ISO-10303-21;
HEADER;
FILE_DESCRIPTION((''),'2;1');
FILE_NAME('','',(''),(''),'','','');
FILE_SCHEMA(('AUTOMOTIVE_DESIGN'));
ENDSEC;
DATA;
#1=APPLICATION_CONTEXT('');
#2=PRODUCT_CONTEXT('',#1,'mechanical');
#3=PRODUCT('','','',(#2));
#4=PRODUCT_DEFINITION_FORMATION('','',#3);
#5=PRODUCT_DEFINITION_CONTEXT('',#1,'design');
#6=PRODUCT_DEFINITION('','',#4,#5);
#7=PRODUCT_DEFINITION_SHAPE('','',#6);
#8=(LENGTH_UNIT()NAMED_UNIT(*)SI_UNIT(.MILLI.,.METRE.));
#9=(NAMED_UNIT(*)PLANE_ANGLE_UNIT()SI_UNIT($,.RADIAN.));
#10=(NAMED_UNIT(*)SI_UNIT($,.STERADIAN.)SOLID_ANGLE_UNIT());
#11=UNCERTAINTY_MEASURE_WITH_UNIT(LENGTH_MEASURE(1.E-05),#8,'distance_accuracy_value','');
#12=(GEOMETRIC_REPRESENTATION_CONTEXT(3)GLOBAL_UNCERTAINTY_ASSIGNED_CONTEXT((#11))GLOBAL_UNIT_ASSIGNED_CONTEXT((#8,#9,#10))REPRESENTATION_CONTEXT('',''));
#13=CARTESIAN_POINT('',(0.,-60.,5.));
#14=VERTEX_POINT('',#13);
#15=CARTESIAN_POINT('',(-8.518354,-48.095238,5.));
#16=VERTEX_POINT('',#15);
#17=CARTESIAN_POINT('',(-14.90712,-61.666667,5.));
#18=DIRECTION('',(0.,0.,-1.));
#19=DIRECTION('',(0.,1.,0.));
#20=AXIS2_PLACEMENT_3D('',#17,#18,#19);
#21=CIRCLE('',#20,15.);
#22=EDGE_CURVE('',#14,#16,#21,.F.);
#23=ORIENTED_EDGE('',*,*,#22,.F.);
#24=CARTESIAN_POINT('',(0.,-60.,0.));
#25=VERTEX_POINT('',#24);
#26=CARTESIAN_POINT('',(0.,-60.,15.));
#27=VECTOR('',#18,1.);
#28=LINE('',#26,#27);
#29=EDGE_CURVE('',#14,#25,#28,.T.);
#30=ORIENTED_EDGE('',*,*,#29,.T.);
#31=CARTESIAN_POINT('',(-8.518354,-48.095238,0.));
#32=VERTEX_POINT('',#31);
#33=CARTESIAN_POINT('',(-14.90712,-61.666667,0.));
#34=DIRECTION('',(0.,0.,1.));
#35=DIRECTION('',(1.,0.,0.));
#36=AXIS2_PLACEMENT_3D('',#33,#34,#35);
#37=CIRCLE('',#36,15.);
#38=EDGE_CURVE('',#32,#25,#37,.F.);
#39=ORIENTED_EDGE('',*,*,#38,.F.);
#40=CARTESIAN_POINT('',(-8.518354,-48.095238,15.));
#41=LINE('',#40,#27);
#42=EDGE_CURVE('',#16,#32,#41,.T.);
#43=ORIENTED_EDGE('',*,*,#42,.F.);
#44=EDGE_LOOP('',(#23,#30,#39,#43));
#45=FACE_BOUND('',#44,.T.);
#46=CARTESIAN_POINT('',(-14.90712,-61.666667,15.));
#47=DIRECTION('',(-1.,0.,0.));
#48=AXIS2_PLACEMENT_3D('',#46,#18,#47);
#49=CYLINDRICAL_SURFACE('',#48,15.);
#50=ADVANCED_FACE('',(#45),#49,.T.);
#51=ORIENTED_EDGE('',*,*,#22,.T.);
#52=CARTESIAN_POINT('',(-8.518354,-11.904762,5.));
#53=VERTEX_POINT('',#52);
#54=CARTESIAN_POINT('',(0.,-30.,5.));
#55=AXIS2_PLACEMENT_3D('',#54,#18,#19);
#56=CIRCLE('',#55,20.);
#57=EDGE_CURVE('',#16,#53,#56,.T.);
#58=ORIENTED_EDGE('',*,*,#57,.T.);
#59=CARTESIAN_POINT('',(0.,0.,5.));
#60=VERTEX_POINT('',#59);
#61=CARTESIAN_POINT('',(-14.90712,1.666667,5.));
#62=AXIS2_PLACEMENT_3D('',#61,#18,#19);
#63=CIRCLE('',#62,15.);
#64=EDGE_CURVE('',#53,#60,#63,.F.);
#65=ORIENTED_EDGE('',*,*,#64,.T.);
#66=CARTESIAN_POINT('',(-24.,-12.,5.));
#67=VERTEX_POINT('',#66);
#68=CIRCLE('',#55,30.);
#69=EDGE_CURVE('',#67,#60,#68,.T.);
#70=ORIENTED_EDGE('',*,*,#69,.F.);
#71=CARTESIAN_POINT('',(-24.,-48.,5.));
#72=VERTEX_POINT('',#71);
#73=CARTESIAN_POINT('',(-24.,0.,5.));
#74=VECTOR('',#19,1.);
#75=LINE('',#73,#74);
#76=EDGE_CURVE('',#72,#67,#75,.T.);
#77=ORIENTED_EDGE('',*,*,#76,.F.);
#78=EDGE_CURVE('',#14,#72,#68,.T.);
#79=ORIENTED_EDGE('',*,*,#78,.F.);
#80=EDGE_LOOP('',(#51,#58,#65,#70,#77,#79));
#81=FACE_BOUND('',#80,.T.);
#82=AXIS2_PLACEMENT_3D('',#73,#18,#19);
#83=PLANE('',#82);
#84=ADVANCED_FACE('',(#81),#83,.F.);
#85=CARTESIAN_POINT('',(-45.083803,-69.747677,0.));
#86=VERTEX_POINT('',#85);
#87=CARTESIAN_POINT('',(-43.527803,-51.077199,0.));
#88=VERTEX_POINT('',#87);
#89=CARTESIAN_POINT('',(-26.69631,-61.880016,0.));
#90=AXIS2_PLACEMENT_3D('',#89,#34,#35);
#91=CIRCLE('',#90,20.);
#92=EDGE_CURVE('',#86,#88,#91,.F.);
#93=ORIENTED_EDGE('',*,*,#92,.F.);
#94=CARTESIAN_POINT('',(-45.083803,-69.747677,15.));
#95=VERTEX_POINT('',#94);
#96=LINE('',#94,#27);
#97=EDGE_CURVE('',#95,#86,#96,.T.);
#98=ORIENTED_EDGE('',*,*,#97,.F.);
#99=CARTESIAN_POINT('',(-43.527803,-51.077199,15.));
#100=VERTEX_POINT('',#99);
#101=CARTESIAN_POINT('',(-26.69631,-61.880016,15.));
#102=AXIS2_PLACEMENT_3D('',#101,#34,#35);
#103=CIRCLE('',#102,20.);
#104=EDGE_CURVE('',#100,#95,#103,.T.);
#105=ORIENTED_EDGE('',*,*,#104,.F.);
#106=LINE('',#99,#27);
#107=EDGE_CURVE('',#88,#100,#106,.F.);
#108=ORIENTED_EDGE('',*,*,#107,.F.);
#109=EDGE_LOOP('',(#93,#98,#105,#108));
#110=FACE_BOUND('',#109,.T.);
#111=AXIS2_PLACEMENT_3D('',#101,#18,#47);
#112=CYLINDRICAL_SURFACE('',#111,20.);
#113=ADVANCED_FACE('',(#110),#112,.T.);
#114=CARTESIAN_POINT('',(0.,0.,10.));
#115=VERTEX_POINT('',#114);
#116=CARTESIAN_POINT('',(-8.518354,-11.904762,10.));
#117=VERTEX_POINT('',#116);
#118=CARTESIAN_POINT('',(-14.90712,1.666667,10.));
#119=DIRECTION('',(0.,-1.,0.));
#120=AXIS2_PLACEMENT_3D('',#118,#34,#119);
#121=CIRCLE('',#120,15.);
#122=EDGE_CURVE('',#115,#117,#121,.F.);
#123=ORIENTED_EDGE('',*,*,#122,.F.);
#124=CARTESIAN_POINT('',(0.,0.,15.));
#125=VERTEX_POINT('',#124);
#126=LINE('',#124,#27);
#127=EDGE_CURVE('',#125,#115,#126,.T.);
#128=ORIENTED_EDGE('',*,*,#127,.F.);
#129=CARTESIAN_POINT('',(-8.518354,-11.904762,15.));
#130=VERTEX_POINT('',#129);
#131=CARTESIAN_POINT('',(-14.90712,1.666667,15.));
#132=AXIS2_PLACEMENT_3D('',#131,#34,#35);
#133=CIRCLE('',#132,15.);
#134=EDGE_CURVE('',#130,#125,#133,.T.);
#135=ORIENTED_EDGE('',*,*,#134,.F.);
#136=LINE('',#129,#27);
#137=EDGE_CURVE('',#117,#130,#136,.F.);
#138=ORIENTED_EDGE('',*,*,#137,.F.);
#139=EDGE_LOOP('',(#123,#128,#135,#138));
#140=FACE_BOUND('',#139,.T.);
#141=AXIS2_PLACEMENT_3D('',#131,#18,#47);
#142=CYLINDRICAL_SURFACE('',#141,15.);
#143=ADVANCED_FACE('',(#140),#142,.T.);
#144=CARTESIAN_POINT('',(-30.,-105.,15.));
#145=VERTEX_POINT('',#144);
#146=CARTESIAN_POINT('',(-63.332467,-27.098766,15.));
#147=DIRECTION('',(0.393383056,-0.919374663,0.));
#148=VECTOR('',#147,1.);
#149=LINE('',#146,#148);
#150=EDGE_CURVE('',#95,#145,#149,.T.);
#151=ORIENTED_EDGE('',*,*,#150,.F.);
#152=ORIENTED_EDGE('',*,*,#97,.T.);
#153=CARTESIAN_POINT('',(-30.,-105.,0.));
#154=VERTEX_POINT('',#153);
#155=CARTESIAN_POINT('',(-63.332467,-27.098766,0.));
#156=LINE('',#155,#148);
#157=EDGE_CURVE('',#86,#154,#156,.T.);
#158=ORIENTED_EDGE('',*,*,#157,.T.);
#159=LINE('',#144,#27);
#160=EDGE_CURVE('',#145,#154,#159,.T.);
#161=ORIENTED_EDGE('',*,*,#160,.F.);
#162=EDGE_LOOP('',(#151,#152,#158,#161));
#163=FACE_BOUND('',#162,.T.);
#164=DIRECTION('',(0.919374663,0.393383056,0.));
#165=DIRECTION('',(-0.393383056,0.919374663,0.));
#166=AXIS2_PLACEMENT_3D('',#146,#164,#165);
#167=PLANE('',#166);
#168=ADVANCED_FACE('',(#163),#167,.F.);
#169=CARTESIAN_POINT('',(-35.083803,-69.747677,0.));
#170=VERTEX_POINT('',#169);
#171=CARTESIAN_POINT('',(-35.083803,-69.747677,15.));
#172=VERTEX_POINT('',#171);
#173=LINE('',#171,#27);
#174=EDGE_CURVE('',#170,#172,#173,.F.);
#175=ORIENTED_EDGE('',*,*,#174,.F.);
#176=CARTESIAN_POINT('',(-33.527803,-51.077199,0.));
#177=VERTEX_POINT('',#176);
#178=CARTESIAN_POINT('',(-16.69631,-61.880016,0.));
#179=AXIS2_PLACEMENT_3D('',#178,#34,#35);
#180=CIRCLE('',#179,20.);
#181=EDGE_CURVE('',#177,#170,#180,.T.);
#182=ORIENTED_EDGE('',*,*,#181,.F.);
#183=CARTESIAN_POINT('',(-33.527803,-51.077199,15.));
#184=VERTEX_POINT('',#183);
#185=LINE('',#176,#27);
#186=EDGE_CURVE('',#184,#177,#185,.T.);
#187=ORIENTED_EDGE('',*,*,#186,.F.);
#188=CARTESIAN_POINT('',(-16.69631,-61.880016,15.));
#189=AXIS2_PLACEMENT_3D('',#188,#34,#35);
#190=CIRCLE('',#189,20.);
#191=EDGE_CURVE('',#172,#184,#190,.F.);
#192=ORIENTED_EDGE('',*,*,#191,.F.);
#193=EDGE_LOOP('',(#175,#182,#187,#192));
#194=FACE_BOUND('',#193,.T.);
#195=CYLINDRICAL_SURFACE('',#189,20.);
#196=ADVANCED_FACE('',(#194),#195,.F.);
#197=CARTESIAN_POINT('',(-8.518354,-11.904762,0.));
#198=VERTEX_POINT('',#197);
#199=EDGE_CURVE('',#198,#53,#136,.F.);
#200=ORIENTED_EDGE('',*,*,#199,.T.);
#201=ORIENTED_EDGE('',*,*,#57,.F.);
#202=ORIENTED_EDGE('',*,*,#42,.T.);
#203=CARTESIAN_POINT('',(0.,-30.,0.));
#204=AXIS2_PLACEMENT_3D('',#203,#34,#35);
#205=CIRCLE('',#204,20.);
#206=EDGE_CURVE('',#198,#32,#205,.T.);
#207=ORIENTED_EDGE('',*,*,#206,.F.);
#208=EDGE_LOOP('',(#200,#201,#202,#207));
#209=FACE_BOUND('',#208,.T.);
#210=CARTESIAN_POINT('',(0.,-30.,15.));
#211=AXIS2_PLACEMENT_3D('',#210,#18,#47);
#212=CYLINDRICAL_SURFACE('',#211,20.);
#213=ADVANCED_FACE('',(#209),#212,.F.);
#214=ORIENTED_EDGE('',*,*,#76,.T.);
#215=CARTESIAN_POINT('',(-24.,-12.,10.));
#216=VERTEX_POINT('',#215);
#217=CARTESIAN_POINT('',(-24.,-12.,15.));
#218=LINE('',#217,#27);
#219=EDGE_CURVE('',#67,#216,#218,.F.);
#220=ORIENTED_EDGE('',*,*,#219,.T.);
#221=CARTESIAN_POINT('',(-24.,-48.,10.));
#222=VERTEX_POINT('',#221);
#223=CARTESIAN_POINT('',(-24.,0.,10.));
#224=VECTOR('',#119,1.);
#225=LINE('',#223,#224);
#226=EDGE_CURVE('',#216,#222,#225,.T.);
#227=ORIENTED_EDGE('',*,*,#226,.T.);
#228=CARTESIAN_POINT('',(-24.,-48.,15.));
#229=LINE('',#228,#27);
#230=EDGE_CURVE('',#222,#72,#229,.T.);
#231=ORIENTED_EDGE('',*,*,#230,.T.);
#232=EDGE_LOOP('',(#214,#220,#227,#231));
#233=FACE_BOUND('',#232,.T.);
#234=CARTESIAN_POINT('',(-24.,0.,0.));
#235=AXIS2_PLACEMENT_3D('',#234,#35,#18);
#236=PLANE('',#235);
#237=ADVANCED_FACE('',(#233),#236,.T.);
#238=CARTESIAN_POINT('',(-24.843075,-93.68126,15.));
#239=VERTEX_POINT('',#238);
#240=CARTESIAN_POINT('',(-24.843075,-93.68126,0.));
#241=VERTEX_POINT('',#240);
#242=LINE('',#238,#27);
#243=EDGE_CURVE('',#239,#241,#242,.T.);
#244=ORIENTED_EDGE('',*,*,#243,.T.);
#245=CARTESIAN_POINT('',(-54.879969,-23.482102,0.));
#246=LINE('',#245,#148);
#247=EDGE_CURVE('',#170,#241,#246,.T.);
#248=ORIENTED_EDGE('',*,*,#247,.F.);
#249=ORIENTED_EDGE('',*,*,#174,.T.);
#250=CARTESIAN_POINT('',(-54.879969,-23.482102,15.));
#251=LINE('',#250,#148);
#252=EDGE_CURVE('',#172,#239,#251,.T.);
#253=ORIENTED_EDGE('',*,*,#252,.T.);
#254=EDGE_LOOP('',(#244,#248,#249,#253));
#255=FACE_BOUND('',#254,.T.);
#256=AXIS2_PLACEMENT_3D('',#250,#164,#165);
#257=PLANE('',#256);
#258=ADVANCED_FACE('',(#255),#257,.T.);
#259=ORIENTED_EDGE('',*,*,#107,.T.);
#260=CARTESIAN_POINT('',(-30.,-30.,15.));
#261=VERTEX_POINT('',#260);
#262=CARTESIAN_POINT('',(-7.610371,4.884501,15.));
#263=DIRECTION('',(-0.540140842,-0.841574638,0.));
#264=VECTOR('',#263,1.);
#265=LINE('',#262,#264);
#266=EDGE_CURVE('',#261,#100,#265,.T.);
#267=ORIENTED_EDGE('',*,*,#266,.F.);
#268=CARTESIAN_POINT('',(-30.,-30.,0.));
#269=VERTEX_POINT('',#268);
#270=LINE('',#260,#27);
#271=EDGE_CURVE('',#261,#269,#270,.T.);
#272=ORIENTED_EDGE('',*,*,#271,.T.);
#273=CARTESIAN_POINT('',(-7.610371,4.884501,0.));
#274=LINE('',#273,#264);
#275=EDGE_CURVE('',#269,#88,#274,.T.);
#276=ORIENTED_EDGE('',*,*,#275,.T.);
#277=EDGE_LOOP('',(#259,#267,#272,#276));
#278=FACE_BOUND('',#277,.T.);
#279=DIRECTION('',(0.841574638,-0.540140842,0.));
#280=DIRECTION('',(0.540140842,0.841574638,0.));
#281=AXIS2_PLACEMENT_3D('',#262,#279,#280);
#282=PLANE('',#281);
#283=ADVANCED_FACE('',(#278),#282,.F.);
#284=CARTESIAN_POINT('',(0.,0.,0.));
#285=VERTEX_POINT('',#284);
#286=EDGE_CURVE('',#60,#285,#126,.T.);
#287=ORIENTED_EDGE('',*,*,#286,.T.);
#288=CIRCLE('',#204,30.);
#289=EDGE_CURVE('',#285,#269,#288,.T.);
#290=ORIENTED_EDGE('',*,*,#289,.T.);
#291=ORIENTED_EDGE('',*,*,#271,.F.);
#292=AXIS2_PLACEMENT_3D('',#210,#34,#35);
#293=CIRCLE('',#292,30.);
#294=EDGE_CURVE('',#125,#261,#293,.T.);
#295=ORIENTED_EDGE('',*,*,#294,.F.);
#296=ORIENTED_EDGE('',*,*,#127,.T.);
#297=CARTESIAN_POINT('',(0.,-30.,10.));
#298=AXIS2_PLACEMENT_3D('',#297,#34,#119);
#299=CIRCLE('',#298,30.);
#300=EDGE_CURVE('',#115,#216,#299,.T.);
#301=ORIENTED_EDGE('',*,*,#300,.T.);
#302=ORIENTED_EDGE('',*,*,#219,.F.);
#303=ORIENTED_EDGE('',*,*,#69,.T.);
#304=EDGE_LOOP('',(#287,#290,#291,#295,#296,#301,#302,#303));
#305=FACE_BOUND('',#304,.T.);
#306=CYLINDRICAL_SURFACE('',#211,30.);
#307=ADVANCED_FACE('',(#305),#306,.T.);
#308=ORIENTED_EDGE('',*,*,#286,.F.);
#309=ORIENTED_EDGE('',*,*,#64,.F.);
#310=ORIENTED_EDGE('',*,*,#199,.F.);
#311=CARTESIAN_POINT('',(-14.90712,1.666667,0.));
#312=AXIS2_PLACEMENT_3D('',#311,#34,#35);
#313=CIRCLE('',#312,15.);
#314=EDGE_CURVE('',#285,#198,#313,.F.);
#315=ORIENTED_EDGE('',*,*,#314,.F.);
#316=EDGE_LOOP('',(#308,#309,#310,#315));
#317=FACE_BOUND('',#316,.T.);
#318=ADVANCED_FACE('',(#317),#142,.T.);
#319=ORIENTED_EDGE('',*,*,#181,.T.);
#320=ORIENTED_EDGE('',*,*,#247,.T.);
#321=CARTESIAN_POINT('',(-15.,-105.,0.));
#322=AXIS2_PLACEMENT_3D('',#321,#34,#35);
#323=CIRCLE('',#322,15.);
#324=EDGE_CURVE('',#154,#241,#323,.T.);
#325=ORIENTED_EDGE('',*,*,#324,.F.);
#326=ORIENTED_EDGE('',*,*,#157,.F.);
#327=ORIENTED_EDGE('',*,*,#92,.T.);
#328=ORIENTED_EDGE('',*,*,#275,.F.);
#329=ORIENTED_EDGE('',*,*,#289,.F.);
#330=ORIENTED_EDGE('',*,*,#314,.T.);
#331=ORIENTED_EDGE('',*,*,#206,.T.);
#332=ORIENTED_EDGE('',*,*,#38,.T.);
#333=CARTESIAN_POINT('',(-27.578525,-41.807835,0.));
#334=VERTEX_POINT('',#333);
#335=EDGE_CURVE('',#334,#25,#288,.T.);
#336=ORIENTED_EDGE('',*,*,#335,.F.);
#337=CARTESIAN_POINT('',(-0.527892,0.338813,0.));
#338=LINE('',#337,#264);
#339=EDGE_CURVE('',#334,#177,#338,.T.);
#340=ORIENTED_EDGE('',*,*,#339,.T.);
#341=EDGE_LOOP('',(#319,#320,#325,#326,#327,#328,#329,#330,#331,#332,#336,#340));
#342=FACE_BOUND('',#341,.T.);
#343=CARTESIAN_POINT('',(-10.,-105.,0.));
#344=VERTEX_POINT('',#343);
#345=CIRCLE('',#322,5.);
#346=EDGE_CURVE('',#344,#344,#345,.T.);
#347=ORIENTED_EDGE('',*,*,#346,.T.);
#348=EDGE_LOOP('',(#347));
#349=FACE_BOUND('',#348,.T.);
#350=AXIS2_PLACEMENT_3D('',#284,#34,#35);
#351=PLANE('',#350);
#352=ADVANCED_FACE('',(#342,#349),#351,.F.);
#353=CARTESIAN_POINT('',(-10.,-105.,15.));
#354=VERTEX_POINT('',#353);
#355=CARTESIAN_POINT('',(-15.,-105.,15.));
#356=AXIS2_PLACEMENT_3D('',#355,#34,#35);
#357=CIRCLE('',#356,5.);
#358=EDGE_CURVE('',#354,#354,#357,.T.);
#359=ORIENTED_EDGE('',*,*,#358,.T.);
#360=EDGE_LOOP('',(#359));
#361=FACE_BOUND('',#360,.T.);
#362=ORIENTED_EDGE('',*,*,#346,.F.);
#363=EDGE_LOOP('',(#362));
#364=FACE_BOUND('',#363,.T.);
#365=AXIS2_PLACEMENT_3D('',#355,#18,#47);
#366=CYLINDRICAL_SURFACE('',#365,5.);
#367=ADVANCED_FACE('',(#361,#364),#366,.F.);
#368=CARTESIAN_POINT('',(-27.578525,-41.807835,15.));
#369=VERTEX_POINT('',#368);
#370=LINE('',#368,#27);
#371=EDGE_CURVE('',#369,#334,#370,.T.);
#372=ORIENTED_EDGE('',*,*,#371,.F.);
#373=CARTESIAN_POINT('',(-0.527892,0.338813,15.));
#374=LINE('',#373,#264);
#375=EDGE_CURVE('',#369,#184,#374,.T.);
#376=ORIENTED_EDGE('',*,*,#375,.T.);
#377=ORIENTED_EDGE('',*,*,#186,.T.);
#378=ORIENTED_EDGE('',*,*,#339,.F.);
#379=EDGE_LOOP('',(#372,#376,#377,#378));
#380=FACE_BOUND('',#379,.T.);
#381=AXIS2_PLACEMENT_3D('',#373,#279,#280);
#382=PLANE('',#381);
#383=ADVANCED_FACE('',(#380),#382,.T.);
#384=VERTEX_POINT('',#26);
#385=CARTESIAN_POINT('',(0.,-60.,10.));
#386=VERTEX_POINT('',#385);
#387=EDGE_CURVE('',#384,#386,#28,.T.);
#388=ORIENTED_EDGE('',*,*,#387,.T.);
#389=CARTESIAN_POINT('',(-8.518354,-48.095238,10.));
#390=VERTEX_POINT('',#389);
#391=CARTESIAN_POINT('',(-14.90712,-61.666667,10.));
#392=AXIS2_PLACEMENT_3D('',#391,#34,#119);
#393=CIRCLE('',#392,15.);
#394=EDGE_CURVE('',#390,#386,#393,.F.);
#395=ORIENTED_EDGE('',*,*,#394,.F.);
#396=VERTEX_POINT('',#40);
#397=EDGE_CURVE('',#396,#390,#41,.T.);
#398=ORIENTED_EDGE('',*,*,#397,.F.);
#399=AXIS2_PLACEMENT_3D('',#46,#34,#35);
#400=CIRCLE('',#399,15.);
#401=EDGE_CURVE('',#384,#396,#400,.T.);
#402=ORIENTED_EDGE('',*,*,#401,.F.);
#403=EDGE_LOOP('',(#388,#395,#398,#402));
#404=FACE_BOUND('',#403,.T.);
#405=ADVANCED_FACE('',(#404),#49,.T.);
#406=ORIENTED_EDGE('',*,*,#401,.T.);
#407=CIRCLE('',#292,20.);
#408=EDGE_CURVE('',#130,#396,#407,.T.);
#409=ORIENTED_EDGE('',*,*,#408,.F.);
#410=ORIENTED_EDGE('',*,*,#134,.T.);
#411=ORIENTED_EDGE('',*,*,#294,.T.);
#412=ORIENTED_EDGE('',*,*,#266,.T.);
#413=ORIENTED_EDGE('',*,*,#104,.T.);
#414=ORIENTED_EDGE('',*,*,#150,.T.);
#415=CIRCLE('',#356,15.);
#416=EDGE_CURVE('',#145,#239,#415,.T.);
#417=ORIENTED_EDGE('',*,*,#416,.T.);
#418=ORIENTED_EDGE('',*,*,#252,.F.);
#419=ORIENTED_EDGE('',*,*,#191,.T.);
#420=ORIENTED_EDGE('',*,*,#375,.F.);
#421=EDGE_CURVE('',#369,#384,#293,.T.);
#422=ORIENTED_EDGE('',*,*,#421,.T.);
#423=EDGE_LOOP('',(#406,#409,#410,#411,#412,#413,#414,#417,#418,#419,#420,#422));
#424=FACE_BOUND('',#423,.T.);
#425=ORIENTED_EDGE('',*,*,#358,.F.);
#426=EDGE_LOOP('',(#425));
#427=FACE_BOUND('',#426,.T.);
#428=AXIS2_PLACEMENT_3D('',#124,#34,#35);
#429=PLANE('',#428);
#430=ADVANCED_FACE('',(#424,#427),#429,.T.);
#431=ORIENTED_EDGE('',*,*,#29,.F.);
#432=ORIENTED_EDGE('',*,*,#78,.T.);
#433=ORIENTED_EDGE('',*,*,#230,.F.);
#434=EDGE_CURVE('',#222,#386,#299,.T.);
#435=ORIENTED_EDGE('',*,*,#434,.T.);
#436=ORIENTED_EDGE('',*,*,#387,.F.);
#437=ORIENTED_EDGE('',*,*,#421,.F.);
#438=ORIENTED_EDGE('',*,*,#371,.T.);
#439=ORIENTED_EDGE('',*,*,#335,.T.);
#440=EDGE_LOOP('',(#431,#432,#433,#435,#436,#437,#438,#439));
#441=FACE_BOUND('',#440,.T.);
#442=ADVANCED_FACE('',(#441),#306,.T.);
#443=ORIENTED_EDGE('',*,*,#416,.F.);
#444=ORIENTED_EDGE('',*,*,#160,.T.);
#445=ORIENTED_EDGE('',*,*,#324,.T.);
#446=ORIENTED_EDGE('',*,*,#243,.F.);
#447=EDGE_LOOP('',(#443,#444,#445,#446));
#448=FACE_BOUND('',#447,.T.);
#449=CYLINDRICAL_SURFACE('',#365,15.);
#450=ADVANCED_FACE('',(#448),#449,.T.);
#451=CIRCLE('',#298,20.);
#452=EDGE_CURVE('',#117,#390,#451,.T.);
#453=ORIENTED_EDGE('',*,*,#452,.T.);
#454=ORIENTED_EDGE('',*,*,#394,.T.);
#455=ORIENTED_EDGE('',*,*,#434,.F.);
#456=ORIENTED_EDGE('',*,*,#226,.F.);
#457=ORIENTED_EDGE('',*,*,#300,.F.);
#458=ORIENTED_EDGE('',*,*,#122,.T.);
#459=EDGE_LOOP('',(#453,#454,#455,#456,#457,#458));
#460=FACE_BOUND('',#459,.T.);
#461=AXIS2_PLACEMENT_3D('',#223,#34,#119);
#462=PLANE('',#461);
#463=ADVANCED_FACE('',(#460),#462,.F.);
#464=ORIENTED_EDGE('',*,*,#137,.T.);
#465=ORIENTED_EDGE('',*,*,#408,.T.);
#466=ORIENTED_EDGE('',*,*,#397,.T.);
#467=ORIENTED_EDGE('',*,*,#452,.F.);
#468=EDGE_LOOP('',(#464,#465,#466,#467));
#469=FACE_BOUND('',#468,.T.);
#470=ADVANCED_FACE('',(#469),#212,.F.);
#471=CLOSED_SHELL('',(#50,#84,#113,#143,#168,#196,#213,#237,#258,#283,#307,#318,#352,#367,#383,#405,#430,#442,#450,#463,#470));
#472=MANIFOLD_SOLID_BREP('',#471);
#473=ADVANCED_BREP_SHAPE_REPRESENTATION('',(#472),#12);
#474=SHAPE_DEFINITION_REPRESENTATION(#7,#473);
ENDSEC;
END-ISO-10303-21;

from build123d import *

# Parameters (mm, degrees)
BOSS_EXTRUDE1_DEPTH = 15
FILLET1_R           = 20
FILLET2_R           = 15
SKETCH2_W           = 5
SKETCH2_H           = 60
CUT_EXTRUDE1_DEPTH  = 24


with BuildPart() as part:
    # Sketch1 → Boss-Extrude1 (new body)
    # profile 1 of 6: a face of its own
    with BuildSketch(Plane.XY):
        with BuildLine():
            Line((-20, -30), (-30, -30))
            ThreePointArc((-30, -30), (-29.388396861, -36.026784376), (-27.578524672, -41.807835403))
            Line((-27.578524672, -41.807835403), (-20, -30))
        make_face()
    # profile 2 of 6: a face of its own
    with BuildSketch(Plane.XY):
        with BuildLine():
            Line((0, -10), (0, 0))
            ThreePointArc((0, 0), (-21.213203436, -8.786796564), (-30, -30))
            Line((-30, -30), (-20, -30))
            ThreePointArc((-20, -30), (-14.142135624, -15.857864376), (0, -10))
        make_face()
    # profile 3 of 6: a face of its own
    with BuildSketch(Plane.XY):
        with BuildLine():
            ThreePointArc((0, -50), (-14.142135624, -44.142135624), (-20, -30))
            Line((-20, -30), (-27.578524672, -41.807835403))
            ThreePointArc((-27.578524672, -41.807835403), (-16.519154608, -55.04231481), (0, -60))
            Line((0, -60), (0, -50))
        make_face()
    # profile 4 of 6: a face of its own
    with BuildSketch(Plane.XY):
        with BuildLine():
            ThreePointArc((-27.578524672, -41.807835403), (-29.388396861, -36.026784376), (-30, -30))
            Line((-30, -30), (-49.254650189, -60))
            Line((-49.254650189, -60), (-30, -105))
            ThreePointArc((-30, -105), (-28.650020621, -98.780921528), (-24.84307506, -93.681260081))
            Line((-24.84307506, -93.681260081), (-39.254650189, -60))
            Line((-39.254650189, -60), (-27.578524672, -41.807835403))
        make_face()
    # profile 5 of 6: a face of its own
    with BuildSketch(Plane.XY):
        with BuildLine():
            ThreePointArc((-24.84307506, -93.681260081), (-28.650020621, -98.780921528), (-30, -105))
            Line((-30, -105), (-20, -105))
            Line((-20, -105), (-24.84307506, -93.681260081))
        make_face()
    # profile 6 of 6: a face of its own
    with BuildSketch(Plane.XY):
        with BuildLine():
            Line((-20, -105), (-30, -105))
            ThreePointArc((-30, -105), (-15, -120), (0, -105))
            ThreePointArc((0, -105), (-8.780921528, -91.349979379), (-24.84307506, -93.681260081))
            Line((-24.84307506, -93.681260081), (-20, -105))
        make_face()
        with BuildLine():
            ThreePointArc((-10, -105), (-15, -110), (-20, -105))
            ThreePointArc((-20, -105), (-15, -100), (-10, -105))
        make_face(mode=Mode.SUBTRACT)
    extrude(amount=BOSS_EXTRUDE1_DEPTH)

    # Fillet1
    fillet1_edges = [part.edges().sort_by_distance(p)[0] for p in [
        (-39.254650189, -60, 7.5),
        (-49.254650189, -60, 7.5),
    ]]
    fillet(fillet1_edges, radius=FILLET1_R)

    # Fillet2
    # the kernel refuses this fillet: 15 mm, written as the material it takes off along each edge
    with BuildSketch(Plane(origin=(0, -50, -25), x_dir=(-0.9759000729485309, 0.21821789023600283, 0), z_dir=(0, 0, 1))) as fillet2_piece_1:
        with BuildLine():
            CenterArc((12.001983963, 14.638501094), FILLET2_R, 198.983752857, 58.411864495)
            Line((-2.182178902, 9.759000729), (-2.46586216, 9.661410722))
            ThreePointArc((-2.46586216, 9.661410722), (-1.383859473, 4.814034998), (-0.292770022, -0.065465367))
            Line((-0.292770022, -0.065465367), (0.065465367, -0.292770022))
            ThreePointArc((0.065465367, -0.292770022), (4.364357805, 0.181998541), (8.663250242, -0.292770022))
            Line((8.663250242, -0.292770022), (8.728715609, 0))
        make_face()
    extrude(amount=65, mode=Mode.SUBTRACT)
    with BuildSketch(Plane(origin=(0, -10, -25), x_dir=(0, 1, 0), z_dir=(0, 0, 1))) as fillet2_piece_2:
        with BuildLine():
            CenterArc((11.666666667, 14.90711985), FILLET2_R, 205.208765297, 58.411864495)
            Line((-1.904761905, 8.5183542), (-2.176190476, 8.390578887))
            ThreePointArc((-2.176190476, 8.390578887), (-0.774768563, 4.298892438), (-0.3, 0))
            Line((-0.3, 0), (0, -0.3))
            ThreePointArc((0, -0.3), (5, -0.3), (9.966666667, -0.298142397))
            Line((9.966666667, -0.298142397), (10, 0))
        make_face()
    extrude(amount=65, mode=Mode.SUBTRACT)

    # Sketch2 → Cut-Extrude1 (cut)
    with BuildSketch(Plane(origin=(0, 0, 0), x_dir=(0, 0, -1), z_dir=(1, 0, 0))):
        with Locations((-7.5, -30)):
            Rectangle(SKETCH2_W, SKETCH2_H)
    extrude(amount=-CUT_EXTRUDE1_DEPTH, mode=Mode.SUBTRACT)


solid = part.part
